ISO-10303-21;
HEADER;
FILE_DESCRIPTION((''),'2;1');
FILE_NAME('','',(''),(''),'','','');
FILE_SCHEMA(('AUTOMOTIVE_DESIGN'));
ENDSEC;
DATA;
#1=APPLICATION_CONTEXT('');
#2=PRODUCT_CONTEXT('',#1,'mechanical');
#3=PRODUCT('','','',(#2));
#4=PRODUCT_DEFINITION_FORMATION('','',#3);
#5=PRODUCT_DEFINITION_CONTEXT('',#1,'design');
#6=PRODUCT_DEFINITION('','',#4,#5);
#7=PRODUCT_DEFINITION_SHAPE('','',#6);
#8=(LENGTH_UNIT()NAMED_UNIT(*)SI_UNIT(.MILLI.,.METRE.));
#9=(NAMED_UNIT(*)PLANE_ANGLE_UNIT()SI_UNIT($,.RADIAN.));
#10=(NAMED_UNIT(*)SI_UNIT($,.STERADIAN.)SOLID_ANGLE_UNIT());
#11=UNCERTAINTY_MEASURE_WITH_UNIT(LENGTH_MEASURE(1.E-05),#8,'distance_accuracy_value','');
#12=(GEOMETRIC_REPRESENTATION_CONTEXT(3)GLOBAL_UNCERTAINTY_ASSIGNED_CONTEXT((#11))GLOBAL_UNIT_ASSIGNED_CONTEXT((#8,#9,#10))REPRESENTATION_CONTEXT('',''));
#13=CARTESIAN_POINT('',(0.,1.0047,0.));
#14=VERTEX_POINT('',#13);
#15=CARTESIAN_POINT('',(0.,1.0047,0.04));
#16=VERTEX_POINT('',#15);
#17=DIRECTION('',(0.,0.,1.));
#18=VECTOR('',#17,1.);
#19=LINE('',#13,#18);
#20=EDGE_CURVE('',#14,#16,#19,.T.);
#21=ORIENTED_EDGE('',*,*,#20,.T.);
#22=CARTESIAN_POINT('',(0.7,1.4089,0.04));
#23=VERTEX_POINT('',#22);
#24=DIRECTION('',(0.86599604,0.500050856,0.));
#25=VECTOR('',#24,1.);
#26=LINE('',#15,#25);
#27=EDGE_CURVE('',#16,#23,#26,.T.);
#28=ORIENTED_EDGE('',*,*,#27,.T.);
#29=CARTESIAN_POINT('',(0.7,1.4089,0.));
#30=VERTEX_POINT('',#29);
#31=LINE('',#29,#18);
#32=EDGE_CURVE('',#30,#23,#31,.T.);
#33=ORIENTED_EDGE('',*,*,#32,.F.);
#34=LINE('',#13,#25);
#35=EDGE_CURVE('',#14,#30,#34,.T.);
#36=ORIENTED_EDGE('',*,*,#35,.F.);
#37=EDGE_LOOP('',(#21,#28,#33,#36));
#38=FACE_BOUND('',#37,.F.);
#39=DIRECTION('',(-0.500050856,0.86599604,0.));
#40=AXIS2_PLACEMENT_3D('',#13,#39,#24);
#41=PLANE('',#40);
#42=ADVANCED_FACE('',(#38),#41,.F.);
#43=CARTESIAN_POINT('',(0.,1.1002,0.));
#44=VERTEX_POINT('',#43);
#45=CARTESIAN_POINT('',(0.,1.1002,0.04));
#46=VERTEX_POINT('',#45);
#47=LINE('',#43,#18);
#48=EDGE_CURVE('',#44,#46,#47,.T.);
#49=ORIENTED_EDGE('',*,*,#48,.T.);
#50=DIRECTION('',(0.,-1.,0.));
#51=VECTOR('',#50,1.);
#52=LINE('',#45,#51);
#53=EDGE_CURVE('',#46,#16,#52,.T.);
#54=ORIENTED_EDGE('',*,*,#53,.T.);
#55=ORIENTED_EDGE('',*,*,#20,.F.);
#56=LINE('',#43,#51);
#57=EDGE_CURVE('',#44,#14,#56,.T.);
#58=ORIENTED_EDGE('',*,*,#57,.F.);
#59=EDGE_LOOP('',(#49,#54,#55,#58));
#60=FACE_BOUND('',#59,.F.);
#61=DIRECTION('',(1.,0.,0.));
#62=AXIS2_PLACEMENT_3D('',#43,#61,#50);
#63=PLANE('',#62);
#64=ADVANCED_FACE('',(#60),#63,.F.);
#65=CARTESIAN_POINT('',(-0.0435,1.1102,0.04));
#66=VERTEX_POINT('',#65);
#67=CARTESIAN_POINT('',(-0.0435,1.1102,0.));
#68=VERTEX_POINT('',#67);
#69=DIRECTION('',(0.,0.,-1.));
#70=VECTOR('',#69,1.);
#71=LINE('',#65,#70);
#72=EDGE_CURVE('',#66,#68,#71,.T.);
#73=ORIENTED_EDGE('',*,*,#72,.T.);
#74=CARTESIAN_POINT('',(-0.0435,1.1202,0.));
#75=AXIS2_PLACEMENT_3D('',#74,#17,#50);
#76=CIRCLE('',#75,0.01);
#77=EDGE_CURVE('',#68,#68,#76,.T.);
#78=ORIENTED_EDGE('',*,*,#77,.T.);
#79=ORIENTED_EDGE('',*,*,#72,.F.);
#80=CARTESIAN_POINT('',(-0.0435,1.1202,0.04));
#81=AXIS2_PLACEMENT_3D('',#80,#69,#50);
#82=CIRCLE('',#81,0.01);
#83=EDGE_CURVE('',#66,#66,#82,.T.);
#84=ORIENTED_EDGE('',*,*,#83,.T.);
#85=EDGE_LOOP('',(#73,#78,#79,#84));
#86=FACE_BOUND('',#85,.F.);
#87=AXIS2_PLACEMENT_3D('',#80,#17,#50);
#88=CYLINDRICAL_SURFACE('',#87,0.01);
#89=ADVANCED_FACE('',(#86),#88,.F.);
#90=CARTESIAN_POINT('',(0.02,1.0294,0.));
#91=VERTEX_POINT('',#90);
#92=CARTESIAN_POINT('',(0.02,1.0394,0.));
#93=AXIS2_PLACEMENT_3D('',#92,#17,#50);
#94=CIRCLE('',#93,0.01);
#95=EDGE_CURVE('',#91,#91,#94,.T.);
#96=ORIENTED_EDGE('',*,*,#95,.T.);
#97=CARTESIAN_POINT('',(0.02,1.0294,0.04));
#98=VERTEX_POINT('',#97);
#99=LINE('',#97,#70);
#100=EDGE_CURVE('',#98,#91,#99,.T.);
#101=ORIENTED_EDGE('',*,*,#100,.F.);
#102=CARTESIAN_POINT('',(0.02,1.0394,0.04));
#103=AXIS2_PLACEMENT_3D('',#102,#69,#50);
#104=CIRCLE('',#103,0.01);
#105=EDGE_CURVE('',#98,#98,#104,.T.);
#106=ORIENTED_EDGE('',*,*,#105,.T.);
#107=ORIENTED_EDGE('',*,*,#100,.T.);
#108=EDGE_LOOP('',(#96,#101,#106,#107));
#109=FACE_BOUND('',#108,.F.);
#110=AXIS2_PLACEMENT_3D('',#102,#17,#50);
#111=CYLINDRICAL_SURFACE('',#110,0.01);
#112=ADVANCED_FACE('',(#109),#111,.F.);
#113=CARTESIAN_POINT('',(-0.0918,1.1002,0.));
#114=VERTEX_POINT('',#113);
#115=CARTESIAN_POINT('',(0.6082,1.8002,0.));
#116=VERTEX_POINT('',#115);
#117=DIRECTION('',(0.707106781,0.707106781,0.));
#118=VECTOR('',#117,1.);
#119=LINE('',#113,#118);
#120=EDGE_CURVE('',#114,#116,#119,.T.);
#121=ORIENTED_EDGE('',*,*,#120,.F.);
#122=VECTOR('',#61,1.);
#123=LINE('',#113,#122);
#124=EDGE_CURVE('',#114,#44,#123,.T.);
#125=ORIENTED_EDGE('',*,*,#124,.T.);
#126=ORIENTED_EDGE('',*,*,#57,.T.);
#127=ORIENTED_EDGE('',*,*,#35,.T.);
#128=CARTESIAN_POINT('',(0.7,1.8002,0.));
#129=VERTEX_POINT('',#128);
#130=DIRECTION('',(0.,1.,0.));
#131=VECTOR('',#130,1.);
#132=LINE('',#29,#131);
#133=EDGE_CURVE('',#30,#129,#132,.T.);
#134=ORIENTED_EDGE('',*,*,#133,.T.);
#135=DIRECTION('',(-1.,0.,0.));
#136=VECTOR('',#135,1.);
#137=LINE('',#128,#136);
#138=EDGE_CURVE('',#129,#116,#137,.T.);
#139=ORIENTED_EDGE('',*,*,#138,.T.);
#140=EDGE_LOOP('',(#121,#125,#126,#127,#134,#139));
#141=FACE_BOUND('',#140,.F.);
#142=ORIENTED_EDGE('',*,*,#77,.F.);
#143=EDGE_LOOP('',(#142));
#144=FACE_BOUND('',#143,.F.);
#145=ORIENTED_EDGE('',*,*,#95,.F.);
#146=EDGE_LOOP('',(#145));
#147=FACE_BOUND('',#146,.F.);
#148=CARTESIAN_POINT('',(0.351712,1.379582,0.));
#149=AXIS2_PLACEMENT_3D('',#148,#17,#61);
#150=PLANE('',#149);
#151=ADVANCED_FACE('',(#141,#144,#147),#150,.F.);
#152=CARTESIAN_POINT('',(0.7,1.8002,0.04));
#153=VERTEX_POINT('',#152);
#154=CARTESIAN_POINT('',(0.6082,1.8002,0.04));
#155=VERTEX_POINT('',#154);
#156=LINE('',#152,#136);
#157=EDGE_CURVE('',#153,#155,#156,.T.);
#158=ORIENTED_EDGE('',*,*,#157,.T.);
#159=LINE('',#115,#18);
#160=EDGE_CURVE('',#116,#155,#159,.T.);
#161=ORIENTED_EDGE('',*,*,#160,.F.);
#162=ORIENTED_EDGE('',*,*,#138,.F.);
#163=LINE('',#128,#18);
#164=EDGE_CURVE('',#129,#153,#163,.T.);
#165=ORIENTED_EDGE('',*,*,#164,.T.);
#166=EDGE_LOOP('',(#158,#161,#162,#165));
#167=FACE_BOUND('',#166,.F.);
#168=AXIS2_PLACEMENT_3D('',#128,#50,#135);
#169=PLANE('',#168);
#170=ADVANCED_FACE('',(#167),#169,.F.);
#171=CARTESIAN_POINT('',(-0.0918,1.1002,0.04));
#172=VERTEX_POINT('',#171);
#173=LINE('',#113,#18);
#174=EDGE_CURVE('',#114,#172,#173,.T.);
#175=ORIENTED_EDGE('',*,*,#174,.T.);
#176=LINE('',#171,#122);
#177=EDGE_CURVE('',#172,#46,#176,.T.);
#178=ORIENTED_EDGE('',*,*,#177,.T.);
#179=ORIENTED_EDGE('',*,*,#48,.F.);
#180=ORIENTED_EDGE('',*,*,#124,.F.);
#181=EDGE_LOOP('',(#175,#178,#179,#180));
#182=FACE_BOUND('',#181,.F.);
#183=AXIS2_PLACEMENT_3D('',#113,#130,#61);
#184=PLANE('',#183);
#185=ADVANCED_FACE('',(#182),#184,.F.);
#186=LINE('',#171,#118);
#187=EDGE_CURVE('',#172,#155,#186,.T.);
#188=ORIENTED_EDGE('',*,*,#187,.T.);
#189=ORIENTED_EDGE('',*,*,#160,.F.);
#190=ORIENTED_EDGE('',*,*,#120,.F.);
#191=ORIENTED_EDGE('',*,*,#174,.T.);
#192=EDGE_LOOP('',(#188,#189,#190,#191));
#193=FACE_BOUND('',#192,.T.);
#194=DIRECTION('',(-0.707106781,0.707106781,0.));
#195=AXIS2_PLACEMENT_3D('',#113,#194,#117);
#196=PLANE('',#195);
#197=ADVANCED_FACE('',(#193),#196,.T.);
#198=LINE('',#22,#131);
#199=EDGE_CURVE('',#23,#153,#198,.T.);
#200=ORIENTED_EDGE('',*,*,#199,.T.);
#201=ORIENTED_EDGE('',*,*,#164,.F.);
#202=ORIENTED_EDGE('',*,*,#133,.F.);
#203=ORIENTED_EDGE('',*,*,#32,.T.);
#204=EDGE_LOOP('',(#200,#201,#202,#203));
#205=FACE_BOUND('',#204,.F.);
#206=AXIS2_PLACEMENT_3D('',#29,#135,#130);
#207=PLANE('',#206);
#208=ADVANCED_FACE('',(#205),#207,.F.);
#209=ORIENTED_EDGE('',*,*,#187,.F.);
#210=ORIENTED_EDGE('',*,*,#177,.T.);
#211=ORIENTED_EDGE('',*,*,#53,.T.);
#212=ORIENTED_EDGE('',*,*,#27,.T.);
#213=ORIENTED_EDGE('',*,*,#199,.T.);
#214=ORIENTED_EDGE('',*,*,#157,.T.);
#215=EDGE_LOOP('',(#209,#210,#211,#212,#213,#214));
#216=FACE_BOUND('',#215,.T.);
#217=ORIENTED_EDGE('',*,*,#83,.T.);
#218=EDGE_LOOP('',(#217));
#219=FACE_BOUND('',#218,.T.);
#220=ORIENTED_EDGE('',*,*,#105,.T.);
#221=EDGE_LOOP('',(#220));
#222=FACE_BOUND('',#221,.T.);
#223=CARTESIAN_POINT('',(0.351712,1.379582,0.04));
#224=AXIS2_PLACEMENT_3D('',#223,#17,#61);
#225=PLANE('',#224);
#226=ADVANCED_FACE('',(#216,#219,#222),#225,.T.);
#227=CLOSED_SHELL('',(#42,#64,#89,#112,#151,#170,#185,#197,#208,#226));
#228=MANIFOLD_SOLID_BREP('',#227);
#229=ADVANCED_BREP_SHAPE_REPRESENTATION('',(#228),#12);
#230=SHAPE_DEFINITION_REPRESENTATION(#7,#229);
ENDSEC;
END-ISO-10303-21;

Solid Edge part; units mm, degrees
sketch "Sketch1" plane through (0, 0, 0) normal (0, 0, 1) x (1, 0, 0)
  line L0 (0, 1.0047) -> (0.7, 1.4089)
  line L1 (0.7, 1.4089) -> (0.7, 1.8002)
  line L2 (0.7, 1.8002) -> (0.6082, 1.8002)
  line L3 (-0.0918, 1.1002) -> (0.6082, 1.8002)
  line L4 (-0.0918, 1.1002) -> (0, 1.1002)
  line L5 (0, 1.1002) -> (0, 1.0047)
extrude "Protrusion1" add sketch "Sketch1" along normal blind 0.04
hole "Bohrung_5" at (-0.0435, 1.1202, 0.04) direction (0, 0, 1) diameter 0.02 end through all both ways yes
hole "Hole1" at (0.02, 1.0394, 0.04) direction (0, 0, 1) diameter 0.02 end through all both ways yes
